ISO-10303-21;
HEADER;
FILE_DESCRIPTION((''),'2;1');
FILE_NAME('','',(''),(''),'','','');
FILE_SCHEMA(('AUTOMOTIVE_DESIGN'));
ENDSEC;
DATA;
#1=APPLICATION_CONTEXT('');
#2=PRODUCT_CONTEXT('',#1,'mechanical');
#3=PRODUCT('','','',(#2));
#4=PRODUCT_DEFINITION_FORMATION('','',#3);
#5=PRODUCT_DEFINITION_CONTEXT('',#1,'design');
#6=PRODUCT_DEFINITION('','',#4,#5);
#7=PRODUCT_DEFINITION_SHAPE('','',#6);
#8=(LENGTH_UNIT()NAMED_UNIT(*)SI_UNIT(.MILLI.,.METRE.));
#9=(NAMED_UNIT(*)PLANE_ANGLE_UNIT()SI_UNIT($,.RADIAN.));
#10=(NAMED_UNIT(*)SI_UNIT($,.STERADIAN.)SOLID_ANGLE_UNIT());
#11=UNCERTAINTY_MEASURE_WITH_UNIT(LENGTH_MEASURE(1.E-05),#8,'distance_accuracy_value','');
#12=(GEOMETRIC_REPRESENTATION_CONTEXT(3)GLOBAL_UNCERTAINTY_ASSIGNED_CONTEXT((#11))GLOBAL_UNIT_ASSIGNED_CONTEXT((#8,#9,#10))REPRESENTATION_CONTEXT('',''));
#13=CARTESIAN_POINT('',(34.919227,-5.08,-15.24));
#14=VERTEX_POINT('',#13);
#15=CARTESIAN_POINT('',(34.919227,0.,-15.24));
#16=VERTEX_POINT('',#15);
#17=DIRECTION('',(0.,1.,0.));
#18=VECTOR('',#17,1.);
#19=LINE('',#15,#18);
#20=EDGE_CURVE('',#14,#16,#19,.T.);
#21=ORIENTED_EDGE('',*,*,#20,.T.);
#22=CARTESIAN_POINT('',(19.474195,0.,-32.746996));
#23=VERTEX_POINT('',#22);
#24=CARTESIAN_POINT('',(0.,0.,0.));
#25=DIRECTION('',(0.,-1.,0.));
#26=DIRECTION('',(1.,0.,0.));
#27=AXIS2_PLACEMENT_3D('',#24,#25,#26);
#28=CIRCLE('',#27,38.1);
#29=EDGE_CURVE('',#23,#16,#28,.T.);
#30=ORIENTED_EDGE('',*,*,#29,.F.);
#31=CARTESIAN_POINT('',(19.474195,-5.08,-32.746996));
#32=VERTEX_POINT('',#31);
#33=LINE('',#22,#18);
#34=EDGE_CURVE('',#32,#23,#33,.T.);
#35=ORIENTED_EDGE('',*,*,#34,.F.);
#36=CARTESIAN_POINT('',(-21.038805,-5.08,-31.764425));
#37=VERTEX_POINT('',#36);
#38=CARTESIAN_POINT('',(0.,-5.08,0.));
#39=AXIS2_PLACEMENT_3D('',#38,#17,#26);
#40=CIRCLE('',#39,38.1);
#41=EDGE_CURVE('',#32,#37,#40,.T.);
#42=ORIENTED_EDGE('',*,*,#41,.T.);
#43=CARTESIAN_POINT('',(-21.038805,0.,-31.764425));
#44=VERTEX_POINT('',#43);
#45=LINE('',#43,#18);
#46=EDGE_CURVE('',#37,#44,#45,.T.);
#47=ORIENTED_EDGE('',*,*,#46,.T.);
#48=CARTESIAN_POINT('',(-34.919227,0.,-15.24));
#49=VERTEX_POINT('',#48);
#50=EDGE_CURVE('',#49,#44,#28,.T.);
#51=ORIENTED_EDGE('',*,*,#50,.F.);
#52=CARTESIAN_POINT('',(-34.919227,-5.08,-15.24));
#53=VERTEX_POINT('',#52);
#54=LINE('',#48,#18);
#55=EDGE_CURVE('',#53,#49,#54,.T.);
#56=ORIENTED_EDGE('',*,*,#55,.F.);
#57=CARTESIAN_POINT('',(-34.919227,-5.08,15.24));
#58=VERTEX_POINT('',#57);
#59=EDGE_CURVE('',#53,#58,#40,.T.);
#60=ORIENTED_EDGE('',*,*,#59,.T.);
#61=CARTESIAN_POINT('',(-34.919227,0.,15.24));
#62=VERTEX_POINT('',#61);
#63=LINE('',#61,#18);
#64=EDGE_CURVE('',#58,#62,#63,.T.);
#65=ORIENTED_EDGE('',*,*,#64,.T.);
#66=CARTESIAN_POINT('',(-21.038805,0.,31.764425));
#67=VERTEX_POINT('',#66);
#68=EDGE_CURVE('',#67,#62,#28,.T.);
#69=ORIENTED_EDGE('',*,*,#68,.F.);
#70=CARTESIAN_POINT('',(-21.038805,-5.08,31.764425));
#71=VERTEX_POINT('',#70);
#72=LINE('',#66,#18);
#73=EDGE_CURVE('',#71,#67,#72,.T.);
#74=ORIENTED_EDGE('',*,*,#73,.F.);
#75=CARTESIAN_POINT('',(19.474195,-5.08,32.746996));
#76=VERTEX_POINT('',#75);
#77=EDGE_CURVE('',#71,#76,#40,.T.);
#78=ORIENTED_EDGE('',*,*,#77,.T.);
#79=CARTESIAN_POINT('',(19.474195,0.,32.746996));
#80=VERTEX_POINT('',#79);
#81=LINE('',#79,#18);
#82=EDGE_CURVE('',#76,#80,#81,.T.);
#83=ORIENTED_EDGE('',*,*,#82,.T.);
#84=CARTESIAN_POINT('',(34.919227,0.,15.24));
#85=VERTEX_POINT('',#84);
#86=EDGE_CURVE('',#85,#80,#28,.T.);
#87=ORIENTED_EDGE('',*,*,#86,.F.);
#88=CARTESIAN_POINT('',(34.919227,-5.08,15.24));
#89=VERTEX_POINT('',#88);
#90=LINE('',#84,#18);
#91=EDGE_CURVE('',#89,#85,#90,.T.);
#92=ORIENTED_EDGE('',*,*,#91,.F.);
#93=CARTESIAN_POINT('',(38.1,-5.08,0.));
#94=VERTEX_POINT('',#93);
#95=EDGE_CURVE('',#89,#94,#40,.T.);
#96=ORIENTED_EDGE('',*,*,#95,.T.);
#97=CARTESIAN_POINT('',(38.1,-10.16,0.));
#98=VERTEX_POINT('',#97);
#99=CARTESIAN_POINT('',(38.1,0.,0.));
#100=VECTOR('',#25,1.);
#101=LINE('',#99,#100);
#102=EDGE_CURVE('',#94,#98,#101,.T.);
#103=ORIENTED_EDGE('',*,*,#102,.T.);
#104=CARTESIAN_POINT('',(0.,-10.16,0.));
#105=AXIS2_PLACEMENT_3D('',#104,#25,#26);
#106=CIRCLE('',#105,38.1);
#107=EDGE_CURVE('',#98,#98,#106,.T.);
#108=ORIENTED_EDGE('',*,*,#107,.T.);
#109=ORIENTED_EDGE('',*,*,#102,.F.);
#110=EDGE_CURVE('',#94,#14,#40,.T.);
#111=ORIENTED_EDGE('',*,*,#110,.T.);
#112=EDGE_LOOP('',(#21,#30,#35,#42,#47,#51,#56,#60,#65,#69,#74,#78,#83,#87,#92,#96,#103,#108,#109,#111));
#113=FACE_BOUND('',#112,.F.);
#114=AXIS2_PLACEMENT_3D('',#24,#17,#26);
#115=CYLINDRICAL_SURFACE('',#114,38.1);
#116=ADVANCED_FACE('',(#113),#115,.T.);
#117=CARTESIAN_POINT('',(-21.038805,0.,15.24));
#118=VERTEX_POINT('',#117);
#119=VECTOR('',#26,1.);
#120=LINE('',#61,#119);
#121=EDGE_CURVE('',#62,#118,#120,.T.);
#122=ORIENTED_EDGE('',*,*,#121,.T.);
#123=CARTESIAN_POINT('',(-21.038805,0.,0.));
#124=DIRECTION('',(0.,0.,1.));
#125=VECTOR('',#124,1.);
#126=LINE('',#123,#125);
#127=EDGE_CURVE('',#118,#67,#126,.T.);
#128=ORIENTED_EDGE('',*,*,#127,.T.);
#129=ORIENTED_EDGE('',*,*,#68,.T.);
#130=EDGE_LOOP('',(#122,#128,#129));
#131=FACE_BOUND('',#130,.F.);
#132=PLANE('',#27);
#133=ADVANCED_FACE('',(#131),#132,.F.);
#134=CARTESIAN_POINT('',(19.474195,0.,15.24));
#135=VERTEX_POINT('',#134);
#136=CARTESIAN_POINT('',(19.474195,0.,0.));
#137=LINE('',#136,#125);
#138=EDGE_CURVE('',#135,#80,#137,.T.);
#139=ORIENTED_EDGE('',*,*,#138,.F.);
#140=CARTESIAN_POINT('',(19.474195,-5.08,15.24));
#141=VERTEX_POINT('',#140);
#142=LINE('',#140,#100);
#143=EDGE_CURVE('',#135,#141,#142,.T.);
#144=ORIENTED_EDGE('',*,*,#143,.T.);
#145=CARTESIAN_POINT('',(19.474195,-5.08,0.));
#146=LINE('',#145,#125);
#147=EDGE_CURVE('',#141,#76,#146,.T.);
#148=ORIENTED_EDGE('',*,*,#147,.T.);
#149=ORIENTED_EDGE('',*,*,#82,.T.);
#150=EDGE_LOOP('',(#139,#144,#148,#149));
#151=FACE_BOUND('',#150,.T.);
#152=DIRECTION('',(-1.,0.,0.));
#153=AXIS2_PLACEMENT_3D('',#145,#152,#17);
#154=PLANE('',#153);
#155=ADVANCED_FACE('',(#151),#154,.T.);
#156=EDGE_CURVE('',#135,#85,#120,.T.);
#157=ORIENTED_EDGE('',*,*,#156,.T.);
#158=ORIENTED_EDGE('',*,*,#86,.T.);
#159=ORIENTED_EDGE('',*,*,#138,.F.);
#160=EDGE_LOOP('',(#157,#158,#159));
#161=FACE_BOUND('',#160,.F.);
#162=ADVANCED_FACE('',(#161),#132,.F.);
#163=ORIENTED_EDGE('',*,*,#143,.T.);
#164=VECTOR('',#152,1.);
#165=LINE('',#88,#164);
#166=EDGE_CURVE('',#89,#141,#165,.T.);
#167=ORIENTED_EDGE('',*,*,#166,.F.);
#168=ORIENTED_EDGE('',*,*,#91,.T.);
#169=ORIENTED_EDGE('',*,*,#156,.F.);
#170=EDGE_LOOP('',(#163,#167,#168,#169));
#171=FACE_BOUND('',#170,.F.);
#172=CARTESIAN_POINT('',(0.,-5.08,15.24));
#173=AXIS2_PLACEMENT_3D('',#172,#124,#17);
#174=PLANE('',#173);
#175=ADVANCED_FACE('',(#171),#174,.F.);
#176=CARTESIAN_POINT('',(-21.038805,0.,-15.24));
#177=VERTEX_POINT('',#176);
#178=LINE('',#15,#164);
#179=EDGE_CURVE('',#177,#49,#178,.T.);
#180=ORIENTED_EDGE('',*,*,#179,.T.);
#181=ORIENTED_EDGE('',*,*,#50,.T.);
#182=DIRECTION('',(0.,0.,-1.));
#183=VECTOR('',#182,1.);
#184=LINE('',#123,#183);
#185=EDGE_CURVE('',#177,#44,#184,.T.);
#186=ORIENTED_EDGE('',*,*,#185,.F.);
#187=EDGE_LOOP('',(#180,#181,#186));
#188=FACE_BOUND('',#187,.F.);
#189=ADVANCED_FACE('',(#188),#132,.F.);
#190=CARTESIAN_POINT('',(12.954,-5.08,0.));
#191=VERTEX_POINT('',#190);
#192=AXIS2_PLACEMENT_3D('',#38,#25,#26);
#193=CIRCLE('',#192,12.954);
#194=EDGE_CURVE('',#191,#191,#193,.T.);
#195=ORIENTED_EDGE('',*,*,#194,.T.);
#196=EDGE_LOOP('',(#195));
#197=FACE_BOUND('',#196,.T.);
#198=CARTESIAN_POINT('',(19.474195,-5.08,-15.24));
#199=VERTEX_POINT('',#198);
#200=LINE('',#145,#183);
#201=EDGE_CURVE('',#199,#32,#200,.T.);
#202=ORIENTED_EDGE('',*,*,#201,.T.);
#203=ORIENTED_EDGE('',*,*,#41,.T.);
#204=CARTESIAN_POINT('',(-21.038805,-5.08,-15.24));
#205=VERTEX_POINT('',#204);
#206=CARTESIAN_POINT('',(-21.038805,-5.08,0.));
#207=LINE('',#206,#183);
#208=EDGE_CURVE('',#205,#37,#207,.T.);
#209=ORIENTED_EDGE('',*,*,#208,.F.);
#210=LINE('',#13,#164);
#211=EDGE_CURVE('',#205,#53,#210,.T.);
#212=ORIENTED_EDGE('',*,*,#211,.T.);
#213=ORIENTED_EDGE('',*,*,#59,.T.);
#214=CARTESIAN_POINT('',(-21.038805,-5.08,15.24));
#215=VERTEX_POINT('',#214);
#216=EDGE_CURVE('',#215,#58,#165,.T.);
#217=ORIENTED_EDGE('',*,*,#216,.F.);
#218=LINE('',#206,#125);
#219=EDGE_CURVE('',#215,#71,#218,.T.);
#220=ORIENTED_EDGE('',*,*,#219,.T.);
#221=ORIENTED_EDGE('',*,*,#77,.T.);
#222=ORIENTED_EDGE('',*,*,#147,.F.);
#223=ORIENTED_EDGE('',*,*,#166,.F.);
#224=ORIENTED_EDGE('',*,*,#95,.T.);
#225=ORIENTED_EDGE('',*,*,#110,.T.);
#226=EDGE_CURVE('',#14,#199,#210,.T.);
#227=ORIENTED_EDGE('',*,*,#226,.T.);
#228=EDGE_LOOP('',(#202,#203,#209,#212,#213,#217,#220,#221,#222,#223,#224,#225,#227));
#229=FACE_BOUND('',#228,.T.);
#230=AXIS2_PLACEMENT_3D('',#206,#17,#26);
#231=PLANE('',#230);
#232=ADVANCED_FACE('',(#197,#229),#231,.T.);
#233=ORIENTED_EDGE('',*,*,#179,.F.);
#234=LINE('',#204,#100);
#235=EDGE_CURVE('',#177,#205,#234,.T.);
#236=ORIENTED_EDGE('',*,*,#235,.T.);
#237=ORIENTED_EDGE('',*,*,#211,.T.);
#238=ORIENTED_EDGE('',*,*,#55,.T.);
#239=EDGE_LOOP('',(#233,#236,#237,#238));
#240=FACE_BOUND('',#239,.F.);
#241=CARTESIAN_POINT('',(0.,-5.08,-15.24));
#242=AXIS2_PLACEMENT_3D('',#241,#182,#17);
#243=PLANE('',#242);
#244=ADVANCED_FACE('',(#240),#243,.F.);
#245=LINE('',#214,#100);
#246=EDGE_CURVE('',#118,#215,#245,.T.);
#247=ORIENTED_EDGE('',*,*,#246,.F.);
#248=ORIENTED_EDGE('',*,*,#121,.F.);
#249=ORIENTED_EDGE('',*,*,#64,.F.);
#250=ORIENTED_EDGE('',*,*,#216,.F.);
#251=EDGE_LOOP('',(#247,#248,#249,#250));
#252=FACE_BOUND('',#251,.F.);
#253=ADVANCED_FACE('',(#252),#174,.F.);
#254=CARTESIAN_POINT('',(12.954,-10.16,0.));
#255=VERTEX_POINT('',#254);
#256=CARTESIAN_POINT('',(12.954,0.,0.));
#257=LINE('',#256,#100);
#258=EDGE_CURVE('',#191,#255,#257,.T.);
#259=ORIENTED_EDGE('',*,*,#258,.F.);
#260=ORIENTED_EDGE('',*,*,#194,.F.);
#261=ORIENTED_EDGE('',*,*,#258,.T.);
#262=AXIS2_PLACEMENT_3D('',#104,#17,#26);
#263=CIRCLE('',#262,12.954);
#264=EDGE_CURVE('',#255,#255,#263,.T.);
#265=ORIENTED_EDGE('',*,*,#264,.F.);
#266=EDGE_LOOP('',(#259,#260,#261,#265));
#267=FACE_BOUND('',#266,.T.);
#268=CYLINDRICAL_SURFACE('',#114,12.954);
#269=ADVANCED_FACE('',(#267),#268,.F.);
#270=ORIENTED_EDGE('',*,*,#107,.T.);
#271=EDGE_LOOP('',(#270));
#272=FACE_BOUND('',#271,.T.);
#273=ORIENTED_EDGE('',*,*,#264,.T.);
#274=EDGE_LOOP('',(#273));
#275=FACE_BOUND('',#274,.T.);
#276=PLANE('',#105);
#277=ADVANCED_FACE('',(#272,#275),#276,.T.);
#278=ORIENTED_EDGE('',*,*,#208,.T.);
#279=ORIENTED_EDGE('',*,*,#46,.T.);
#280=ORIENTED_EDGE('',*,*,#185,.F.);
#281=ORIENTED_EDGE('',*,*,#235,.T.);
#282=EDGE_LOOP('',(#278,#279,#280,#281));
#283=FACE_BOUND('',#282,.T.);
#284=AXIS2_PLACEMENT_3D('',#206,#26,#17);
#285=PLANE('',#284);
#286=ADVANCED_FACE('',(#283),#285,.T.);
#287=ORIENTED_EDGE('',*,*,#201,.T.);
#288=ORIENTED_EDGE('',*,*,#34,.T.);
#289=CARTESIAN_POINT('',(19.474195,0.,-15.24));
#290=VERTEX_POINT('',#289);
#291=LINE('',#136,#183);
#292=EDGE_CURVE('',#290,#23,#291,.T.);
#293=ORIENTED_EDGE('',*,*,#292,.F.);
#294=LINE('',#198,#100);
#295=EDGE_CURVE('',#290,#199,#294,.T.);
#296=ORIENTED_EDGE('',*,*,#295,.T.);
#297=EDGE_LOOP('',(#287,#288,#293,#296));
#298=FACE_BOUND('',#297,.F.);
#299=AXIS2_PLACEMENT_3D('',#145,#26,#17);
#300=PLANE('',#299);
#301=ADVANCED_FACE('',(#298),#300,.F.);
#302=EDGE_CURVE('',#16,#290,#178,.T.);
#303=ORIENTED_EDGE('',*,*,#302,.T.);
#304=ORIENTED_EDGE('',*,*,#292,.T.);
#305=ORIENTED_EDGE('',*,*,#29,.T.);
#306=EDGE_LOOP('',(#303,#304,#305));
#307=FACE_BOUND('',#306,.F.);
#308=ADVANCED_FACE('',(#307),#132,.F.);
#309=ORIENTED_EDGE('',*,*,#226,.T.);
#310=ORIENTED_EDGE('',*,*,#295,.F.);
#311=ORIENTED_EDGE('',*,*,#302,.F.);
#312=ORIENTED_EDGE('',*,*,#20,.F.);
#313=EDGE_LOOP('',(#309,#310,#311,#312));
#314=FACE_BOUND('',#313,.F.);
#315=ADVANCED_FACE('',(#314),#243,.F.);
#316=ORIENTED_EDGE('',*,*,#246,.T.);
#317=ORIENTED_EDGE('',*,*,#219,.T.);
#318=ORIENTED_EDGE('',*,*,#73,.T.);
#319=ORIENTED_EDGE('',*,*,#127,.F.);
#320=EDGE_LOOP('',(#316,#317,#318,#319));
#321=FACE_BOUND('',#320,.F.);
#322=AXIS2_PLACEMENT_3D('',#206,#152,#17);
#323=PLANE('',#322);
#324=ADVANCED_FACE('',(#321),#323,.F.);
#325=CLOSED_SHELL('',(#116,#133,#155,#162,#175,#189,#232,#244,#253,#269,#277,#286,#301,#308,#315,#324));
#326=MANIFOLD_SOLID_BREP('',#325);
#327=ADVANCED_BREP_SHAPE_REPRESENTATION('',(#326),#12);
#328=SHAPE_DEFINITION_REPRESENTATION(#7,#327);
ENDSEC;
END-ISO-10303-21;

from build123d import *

# Parameters (mm, degrees)
F0_R          = 12.7
F1_DEPTH      = 17.78
F2_R          = 38.1
F3_DEPTH      = 10.16
F4_R          = 12.954
F5_DEPTH      = 17.781
F5_DEPTH_BACK = 115
F6_W          = 5.08
F6_H          = 30.48
F7_DEPTH      = 38.101
F7_DEPTH_BACK = 38.101
F8_W          = 40.513
F8_H          = 5.08
F9_DEPTH      = 38.101
F9_DEPTH_BACK = 38.101


# Not quite as in the source:
# - an extrude ends at something that could not be found from the text; its depth is read off the source's solid


with BuildPart() as f1:
    # F0 (on Front) → F1 (new body)
    with BuildSketch(Plane.XZ):
        Circle(F0_R)
    extrude(amount=F1_DEPTH)

    # F2 (on Front) → F3 (join)
    with BuildSketch(Plane.XZ):
        Circle(F2_R)
    extrude(amount=F3_DEPTH)

    # F4 (on Front) → F5 (cut, two sides)
    with BuildSketch(Plane.XZ) as f5_sk:
        Circle(F4_R)
    extrude(amount=F5_DEPTH, mode=Mode.SUBTRACT)
    extrude(f5_sk.sketch, amount=-F5_DEPTH_BACK, mode=Mode.SUBTRACT)

    # F6 (on Right) → F7 (cut, two sides)
    with BuildSketch(Plane.YZ) as f7_sk:
        with Locations((-2.54, 0)):
            Rectangle(F6_W, F6_H)
    extrude(amount=F7_DEPTH, mode=Mode.SUBTRACT)
    extrude(f7_sk.sketch, amount=-F7_DEPTH_BACK, mode=Mode.SUBTRACT)

    # F8 (on Top) → F9 (cut, two sides)
    with BuildSketch(Plane.XY) as f9_sk:
        with Locations((-0.7823046945, -2.54)):
            Rectangle(F8_W, F8_H)
    extrude(amount=-F9_DEPTH, mode=Mode.SUBTRACT)
    extrude(f9_sk.sketch, amount=F9_DEPTH_BACK, mode=Mode.SUBTRACT)


solid = f1.part
